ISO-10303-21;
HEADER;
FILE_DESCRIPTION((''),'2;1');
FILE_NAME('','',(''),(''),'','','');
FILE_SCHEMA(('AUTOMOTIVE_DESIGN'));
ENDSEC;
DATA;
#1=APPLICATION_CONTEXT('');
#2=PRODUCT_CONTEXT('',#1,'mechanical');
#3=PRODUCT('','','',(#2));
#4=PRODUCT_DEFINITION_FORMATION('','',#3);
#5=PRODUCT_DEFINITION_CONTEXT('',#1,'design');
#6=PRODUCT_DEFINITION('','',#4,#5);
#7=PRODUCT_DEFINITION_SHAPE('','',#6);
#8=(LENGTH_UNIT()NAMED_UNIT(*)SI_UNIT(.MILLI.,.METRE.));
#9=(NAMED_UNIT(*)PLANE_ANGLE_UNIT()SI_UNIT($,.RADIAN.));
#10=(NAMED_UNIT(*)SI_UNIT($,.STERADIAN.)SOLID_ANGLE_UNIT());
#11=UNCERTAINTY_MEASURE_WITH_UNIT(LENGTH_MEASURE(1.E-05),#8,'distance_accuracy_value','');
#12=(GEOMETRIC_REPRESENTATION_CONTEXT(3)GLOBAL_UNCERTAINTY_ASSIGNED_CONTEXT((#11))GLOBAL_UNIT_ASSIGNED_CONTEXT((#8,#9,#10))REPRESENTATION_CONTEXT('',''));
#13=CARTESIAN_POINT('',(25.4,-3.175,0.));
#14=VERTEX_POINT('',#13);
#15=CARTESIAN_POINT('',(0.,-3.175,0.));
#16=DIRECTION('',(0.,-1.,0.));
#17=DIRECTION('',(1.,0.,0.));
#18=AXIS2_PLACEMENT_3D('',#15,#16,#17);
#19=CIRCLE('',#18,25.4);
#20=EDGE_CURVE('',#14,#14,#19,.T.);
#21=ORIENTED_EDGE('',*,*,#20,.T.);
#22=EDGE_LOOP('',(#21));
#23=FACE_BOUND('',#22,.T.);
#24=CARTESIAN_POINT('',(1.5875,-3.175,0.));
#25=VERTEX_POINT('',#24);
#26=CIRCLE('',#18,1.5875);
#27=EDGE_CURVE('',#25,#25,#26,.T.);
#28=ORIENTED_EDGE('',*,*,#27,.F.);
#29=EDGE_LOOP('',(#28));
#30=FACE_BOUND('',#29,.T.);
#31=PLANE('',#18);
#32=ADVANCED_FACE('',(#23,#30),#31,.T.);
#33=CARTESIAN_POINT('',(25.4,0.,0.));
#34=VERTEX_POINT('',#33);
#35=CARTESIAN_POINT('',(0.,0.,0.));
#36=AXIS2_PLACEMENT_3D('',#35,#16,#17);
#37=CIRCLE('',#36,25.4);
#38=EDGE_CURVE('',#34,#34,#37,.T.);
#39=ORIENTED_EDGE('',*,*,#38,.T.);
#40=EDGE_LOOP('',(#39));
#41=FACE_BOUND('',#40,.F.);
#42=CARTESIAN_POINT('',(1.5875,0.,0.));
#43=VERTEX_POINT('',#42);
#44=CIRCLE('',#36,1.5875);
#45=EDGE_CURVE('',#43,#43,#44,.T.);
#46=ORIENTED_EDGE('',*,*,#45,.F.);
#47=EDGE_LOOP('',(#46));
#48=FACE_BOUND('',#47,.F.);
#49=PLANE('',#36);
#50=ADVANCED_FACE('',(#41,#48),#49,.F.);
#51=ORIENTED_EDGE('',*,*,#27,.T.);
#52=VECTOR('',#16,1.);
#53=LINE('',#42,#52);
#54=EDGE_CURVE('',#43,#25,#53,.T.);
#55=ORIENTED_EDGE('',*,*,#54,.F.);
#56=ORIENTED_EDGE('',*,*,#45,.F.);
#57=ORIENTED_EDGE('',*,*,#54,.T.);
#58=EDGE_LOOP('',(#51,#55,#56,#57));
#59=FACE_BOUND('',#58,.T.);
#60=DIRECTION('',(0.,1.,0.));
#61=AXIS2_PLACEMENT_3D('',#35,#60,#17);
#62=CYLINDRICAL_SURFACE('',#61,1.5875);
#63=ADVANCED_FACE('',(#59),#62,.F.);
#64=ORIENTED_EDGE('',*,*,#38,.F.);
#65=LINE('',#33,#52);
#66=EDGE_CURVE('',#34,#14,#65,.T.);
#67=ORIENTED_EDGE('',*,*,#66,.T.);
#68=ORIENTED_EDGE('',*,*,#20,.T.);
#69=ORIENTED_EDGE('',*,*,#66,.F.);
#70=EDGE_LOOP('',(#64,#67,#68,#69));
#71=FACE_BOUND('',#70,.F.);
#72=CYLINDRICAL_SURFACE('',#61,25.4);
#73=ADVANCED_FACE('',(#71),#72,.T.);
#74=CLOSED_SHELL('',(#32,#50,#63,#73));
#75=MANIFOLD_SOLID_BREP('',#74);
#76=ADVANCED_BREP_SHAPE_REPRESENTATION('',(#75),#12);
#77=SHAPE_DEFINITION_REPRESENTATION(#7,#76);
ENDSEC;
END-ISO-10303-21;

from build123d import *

# Parameters (mm, degrees)
F0_R     = 25.4
F0_R_2   = 22.86
F0_R_3   = 12.7
F0_R_4   = 1.5875
F1_DEPTH = 3.175


# Not quite as in the source:
# - a length typed as a fraction of an inch, garbled in the dataset ("3 / 203.2 mm" for 3/8 in), is restored
# - a feature names something its author has since deleted; it is built from what else it names


with BuildPart() as f1:
    # F0 (on Front) → F1 (new body)
    with BuildSketch(Plane.XZ):
        Circle(F0_R)
        Circle(F0_R_2, mode=Mode.SUBTRACT)
        Circle(F0_R_2)
        Circle(F0_R_3, mode=Mode.SUBTRACT)
        Circle(F0_R_3)
        Circle(F0_R_4, mode=Mode.SUBTRACT)
    extrude(amount=F1_DEPTH)


solid = f1.part
